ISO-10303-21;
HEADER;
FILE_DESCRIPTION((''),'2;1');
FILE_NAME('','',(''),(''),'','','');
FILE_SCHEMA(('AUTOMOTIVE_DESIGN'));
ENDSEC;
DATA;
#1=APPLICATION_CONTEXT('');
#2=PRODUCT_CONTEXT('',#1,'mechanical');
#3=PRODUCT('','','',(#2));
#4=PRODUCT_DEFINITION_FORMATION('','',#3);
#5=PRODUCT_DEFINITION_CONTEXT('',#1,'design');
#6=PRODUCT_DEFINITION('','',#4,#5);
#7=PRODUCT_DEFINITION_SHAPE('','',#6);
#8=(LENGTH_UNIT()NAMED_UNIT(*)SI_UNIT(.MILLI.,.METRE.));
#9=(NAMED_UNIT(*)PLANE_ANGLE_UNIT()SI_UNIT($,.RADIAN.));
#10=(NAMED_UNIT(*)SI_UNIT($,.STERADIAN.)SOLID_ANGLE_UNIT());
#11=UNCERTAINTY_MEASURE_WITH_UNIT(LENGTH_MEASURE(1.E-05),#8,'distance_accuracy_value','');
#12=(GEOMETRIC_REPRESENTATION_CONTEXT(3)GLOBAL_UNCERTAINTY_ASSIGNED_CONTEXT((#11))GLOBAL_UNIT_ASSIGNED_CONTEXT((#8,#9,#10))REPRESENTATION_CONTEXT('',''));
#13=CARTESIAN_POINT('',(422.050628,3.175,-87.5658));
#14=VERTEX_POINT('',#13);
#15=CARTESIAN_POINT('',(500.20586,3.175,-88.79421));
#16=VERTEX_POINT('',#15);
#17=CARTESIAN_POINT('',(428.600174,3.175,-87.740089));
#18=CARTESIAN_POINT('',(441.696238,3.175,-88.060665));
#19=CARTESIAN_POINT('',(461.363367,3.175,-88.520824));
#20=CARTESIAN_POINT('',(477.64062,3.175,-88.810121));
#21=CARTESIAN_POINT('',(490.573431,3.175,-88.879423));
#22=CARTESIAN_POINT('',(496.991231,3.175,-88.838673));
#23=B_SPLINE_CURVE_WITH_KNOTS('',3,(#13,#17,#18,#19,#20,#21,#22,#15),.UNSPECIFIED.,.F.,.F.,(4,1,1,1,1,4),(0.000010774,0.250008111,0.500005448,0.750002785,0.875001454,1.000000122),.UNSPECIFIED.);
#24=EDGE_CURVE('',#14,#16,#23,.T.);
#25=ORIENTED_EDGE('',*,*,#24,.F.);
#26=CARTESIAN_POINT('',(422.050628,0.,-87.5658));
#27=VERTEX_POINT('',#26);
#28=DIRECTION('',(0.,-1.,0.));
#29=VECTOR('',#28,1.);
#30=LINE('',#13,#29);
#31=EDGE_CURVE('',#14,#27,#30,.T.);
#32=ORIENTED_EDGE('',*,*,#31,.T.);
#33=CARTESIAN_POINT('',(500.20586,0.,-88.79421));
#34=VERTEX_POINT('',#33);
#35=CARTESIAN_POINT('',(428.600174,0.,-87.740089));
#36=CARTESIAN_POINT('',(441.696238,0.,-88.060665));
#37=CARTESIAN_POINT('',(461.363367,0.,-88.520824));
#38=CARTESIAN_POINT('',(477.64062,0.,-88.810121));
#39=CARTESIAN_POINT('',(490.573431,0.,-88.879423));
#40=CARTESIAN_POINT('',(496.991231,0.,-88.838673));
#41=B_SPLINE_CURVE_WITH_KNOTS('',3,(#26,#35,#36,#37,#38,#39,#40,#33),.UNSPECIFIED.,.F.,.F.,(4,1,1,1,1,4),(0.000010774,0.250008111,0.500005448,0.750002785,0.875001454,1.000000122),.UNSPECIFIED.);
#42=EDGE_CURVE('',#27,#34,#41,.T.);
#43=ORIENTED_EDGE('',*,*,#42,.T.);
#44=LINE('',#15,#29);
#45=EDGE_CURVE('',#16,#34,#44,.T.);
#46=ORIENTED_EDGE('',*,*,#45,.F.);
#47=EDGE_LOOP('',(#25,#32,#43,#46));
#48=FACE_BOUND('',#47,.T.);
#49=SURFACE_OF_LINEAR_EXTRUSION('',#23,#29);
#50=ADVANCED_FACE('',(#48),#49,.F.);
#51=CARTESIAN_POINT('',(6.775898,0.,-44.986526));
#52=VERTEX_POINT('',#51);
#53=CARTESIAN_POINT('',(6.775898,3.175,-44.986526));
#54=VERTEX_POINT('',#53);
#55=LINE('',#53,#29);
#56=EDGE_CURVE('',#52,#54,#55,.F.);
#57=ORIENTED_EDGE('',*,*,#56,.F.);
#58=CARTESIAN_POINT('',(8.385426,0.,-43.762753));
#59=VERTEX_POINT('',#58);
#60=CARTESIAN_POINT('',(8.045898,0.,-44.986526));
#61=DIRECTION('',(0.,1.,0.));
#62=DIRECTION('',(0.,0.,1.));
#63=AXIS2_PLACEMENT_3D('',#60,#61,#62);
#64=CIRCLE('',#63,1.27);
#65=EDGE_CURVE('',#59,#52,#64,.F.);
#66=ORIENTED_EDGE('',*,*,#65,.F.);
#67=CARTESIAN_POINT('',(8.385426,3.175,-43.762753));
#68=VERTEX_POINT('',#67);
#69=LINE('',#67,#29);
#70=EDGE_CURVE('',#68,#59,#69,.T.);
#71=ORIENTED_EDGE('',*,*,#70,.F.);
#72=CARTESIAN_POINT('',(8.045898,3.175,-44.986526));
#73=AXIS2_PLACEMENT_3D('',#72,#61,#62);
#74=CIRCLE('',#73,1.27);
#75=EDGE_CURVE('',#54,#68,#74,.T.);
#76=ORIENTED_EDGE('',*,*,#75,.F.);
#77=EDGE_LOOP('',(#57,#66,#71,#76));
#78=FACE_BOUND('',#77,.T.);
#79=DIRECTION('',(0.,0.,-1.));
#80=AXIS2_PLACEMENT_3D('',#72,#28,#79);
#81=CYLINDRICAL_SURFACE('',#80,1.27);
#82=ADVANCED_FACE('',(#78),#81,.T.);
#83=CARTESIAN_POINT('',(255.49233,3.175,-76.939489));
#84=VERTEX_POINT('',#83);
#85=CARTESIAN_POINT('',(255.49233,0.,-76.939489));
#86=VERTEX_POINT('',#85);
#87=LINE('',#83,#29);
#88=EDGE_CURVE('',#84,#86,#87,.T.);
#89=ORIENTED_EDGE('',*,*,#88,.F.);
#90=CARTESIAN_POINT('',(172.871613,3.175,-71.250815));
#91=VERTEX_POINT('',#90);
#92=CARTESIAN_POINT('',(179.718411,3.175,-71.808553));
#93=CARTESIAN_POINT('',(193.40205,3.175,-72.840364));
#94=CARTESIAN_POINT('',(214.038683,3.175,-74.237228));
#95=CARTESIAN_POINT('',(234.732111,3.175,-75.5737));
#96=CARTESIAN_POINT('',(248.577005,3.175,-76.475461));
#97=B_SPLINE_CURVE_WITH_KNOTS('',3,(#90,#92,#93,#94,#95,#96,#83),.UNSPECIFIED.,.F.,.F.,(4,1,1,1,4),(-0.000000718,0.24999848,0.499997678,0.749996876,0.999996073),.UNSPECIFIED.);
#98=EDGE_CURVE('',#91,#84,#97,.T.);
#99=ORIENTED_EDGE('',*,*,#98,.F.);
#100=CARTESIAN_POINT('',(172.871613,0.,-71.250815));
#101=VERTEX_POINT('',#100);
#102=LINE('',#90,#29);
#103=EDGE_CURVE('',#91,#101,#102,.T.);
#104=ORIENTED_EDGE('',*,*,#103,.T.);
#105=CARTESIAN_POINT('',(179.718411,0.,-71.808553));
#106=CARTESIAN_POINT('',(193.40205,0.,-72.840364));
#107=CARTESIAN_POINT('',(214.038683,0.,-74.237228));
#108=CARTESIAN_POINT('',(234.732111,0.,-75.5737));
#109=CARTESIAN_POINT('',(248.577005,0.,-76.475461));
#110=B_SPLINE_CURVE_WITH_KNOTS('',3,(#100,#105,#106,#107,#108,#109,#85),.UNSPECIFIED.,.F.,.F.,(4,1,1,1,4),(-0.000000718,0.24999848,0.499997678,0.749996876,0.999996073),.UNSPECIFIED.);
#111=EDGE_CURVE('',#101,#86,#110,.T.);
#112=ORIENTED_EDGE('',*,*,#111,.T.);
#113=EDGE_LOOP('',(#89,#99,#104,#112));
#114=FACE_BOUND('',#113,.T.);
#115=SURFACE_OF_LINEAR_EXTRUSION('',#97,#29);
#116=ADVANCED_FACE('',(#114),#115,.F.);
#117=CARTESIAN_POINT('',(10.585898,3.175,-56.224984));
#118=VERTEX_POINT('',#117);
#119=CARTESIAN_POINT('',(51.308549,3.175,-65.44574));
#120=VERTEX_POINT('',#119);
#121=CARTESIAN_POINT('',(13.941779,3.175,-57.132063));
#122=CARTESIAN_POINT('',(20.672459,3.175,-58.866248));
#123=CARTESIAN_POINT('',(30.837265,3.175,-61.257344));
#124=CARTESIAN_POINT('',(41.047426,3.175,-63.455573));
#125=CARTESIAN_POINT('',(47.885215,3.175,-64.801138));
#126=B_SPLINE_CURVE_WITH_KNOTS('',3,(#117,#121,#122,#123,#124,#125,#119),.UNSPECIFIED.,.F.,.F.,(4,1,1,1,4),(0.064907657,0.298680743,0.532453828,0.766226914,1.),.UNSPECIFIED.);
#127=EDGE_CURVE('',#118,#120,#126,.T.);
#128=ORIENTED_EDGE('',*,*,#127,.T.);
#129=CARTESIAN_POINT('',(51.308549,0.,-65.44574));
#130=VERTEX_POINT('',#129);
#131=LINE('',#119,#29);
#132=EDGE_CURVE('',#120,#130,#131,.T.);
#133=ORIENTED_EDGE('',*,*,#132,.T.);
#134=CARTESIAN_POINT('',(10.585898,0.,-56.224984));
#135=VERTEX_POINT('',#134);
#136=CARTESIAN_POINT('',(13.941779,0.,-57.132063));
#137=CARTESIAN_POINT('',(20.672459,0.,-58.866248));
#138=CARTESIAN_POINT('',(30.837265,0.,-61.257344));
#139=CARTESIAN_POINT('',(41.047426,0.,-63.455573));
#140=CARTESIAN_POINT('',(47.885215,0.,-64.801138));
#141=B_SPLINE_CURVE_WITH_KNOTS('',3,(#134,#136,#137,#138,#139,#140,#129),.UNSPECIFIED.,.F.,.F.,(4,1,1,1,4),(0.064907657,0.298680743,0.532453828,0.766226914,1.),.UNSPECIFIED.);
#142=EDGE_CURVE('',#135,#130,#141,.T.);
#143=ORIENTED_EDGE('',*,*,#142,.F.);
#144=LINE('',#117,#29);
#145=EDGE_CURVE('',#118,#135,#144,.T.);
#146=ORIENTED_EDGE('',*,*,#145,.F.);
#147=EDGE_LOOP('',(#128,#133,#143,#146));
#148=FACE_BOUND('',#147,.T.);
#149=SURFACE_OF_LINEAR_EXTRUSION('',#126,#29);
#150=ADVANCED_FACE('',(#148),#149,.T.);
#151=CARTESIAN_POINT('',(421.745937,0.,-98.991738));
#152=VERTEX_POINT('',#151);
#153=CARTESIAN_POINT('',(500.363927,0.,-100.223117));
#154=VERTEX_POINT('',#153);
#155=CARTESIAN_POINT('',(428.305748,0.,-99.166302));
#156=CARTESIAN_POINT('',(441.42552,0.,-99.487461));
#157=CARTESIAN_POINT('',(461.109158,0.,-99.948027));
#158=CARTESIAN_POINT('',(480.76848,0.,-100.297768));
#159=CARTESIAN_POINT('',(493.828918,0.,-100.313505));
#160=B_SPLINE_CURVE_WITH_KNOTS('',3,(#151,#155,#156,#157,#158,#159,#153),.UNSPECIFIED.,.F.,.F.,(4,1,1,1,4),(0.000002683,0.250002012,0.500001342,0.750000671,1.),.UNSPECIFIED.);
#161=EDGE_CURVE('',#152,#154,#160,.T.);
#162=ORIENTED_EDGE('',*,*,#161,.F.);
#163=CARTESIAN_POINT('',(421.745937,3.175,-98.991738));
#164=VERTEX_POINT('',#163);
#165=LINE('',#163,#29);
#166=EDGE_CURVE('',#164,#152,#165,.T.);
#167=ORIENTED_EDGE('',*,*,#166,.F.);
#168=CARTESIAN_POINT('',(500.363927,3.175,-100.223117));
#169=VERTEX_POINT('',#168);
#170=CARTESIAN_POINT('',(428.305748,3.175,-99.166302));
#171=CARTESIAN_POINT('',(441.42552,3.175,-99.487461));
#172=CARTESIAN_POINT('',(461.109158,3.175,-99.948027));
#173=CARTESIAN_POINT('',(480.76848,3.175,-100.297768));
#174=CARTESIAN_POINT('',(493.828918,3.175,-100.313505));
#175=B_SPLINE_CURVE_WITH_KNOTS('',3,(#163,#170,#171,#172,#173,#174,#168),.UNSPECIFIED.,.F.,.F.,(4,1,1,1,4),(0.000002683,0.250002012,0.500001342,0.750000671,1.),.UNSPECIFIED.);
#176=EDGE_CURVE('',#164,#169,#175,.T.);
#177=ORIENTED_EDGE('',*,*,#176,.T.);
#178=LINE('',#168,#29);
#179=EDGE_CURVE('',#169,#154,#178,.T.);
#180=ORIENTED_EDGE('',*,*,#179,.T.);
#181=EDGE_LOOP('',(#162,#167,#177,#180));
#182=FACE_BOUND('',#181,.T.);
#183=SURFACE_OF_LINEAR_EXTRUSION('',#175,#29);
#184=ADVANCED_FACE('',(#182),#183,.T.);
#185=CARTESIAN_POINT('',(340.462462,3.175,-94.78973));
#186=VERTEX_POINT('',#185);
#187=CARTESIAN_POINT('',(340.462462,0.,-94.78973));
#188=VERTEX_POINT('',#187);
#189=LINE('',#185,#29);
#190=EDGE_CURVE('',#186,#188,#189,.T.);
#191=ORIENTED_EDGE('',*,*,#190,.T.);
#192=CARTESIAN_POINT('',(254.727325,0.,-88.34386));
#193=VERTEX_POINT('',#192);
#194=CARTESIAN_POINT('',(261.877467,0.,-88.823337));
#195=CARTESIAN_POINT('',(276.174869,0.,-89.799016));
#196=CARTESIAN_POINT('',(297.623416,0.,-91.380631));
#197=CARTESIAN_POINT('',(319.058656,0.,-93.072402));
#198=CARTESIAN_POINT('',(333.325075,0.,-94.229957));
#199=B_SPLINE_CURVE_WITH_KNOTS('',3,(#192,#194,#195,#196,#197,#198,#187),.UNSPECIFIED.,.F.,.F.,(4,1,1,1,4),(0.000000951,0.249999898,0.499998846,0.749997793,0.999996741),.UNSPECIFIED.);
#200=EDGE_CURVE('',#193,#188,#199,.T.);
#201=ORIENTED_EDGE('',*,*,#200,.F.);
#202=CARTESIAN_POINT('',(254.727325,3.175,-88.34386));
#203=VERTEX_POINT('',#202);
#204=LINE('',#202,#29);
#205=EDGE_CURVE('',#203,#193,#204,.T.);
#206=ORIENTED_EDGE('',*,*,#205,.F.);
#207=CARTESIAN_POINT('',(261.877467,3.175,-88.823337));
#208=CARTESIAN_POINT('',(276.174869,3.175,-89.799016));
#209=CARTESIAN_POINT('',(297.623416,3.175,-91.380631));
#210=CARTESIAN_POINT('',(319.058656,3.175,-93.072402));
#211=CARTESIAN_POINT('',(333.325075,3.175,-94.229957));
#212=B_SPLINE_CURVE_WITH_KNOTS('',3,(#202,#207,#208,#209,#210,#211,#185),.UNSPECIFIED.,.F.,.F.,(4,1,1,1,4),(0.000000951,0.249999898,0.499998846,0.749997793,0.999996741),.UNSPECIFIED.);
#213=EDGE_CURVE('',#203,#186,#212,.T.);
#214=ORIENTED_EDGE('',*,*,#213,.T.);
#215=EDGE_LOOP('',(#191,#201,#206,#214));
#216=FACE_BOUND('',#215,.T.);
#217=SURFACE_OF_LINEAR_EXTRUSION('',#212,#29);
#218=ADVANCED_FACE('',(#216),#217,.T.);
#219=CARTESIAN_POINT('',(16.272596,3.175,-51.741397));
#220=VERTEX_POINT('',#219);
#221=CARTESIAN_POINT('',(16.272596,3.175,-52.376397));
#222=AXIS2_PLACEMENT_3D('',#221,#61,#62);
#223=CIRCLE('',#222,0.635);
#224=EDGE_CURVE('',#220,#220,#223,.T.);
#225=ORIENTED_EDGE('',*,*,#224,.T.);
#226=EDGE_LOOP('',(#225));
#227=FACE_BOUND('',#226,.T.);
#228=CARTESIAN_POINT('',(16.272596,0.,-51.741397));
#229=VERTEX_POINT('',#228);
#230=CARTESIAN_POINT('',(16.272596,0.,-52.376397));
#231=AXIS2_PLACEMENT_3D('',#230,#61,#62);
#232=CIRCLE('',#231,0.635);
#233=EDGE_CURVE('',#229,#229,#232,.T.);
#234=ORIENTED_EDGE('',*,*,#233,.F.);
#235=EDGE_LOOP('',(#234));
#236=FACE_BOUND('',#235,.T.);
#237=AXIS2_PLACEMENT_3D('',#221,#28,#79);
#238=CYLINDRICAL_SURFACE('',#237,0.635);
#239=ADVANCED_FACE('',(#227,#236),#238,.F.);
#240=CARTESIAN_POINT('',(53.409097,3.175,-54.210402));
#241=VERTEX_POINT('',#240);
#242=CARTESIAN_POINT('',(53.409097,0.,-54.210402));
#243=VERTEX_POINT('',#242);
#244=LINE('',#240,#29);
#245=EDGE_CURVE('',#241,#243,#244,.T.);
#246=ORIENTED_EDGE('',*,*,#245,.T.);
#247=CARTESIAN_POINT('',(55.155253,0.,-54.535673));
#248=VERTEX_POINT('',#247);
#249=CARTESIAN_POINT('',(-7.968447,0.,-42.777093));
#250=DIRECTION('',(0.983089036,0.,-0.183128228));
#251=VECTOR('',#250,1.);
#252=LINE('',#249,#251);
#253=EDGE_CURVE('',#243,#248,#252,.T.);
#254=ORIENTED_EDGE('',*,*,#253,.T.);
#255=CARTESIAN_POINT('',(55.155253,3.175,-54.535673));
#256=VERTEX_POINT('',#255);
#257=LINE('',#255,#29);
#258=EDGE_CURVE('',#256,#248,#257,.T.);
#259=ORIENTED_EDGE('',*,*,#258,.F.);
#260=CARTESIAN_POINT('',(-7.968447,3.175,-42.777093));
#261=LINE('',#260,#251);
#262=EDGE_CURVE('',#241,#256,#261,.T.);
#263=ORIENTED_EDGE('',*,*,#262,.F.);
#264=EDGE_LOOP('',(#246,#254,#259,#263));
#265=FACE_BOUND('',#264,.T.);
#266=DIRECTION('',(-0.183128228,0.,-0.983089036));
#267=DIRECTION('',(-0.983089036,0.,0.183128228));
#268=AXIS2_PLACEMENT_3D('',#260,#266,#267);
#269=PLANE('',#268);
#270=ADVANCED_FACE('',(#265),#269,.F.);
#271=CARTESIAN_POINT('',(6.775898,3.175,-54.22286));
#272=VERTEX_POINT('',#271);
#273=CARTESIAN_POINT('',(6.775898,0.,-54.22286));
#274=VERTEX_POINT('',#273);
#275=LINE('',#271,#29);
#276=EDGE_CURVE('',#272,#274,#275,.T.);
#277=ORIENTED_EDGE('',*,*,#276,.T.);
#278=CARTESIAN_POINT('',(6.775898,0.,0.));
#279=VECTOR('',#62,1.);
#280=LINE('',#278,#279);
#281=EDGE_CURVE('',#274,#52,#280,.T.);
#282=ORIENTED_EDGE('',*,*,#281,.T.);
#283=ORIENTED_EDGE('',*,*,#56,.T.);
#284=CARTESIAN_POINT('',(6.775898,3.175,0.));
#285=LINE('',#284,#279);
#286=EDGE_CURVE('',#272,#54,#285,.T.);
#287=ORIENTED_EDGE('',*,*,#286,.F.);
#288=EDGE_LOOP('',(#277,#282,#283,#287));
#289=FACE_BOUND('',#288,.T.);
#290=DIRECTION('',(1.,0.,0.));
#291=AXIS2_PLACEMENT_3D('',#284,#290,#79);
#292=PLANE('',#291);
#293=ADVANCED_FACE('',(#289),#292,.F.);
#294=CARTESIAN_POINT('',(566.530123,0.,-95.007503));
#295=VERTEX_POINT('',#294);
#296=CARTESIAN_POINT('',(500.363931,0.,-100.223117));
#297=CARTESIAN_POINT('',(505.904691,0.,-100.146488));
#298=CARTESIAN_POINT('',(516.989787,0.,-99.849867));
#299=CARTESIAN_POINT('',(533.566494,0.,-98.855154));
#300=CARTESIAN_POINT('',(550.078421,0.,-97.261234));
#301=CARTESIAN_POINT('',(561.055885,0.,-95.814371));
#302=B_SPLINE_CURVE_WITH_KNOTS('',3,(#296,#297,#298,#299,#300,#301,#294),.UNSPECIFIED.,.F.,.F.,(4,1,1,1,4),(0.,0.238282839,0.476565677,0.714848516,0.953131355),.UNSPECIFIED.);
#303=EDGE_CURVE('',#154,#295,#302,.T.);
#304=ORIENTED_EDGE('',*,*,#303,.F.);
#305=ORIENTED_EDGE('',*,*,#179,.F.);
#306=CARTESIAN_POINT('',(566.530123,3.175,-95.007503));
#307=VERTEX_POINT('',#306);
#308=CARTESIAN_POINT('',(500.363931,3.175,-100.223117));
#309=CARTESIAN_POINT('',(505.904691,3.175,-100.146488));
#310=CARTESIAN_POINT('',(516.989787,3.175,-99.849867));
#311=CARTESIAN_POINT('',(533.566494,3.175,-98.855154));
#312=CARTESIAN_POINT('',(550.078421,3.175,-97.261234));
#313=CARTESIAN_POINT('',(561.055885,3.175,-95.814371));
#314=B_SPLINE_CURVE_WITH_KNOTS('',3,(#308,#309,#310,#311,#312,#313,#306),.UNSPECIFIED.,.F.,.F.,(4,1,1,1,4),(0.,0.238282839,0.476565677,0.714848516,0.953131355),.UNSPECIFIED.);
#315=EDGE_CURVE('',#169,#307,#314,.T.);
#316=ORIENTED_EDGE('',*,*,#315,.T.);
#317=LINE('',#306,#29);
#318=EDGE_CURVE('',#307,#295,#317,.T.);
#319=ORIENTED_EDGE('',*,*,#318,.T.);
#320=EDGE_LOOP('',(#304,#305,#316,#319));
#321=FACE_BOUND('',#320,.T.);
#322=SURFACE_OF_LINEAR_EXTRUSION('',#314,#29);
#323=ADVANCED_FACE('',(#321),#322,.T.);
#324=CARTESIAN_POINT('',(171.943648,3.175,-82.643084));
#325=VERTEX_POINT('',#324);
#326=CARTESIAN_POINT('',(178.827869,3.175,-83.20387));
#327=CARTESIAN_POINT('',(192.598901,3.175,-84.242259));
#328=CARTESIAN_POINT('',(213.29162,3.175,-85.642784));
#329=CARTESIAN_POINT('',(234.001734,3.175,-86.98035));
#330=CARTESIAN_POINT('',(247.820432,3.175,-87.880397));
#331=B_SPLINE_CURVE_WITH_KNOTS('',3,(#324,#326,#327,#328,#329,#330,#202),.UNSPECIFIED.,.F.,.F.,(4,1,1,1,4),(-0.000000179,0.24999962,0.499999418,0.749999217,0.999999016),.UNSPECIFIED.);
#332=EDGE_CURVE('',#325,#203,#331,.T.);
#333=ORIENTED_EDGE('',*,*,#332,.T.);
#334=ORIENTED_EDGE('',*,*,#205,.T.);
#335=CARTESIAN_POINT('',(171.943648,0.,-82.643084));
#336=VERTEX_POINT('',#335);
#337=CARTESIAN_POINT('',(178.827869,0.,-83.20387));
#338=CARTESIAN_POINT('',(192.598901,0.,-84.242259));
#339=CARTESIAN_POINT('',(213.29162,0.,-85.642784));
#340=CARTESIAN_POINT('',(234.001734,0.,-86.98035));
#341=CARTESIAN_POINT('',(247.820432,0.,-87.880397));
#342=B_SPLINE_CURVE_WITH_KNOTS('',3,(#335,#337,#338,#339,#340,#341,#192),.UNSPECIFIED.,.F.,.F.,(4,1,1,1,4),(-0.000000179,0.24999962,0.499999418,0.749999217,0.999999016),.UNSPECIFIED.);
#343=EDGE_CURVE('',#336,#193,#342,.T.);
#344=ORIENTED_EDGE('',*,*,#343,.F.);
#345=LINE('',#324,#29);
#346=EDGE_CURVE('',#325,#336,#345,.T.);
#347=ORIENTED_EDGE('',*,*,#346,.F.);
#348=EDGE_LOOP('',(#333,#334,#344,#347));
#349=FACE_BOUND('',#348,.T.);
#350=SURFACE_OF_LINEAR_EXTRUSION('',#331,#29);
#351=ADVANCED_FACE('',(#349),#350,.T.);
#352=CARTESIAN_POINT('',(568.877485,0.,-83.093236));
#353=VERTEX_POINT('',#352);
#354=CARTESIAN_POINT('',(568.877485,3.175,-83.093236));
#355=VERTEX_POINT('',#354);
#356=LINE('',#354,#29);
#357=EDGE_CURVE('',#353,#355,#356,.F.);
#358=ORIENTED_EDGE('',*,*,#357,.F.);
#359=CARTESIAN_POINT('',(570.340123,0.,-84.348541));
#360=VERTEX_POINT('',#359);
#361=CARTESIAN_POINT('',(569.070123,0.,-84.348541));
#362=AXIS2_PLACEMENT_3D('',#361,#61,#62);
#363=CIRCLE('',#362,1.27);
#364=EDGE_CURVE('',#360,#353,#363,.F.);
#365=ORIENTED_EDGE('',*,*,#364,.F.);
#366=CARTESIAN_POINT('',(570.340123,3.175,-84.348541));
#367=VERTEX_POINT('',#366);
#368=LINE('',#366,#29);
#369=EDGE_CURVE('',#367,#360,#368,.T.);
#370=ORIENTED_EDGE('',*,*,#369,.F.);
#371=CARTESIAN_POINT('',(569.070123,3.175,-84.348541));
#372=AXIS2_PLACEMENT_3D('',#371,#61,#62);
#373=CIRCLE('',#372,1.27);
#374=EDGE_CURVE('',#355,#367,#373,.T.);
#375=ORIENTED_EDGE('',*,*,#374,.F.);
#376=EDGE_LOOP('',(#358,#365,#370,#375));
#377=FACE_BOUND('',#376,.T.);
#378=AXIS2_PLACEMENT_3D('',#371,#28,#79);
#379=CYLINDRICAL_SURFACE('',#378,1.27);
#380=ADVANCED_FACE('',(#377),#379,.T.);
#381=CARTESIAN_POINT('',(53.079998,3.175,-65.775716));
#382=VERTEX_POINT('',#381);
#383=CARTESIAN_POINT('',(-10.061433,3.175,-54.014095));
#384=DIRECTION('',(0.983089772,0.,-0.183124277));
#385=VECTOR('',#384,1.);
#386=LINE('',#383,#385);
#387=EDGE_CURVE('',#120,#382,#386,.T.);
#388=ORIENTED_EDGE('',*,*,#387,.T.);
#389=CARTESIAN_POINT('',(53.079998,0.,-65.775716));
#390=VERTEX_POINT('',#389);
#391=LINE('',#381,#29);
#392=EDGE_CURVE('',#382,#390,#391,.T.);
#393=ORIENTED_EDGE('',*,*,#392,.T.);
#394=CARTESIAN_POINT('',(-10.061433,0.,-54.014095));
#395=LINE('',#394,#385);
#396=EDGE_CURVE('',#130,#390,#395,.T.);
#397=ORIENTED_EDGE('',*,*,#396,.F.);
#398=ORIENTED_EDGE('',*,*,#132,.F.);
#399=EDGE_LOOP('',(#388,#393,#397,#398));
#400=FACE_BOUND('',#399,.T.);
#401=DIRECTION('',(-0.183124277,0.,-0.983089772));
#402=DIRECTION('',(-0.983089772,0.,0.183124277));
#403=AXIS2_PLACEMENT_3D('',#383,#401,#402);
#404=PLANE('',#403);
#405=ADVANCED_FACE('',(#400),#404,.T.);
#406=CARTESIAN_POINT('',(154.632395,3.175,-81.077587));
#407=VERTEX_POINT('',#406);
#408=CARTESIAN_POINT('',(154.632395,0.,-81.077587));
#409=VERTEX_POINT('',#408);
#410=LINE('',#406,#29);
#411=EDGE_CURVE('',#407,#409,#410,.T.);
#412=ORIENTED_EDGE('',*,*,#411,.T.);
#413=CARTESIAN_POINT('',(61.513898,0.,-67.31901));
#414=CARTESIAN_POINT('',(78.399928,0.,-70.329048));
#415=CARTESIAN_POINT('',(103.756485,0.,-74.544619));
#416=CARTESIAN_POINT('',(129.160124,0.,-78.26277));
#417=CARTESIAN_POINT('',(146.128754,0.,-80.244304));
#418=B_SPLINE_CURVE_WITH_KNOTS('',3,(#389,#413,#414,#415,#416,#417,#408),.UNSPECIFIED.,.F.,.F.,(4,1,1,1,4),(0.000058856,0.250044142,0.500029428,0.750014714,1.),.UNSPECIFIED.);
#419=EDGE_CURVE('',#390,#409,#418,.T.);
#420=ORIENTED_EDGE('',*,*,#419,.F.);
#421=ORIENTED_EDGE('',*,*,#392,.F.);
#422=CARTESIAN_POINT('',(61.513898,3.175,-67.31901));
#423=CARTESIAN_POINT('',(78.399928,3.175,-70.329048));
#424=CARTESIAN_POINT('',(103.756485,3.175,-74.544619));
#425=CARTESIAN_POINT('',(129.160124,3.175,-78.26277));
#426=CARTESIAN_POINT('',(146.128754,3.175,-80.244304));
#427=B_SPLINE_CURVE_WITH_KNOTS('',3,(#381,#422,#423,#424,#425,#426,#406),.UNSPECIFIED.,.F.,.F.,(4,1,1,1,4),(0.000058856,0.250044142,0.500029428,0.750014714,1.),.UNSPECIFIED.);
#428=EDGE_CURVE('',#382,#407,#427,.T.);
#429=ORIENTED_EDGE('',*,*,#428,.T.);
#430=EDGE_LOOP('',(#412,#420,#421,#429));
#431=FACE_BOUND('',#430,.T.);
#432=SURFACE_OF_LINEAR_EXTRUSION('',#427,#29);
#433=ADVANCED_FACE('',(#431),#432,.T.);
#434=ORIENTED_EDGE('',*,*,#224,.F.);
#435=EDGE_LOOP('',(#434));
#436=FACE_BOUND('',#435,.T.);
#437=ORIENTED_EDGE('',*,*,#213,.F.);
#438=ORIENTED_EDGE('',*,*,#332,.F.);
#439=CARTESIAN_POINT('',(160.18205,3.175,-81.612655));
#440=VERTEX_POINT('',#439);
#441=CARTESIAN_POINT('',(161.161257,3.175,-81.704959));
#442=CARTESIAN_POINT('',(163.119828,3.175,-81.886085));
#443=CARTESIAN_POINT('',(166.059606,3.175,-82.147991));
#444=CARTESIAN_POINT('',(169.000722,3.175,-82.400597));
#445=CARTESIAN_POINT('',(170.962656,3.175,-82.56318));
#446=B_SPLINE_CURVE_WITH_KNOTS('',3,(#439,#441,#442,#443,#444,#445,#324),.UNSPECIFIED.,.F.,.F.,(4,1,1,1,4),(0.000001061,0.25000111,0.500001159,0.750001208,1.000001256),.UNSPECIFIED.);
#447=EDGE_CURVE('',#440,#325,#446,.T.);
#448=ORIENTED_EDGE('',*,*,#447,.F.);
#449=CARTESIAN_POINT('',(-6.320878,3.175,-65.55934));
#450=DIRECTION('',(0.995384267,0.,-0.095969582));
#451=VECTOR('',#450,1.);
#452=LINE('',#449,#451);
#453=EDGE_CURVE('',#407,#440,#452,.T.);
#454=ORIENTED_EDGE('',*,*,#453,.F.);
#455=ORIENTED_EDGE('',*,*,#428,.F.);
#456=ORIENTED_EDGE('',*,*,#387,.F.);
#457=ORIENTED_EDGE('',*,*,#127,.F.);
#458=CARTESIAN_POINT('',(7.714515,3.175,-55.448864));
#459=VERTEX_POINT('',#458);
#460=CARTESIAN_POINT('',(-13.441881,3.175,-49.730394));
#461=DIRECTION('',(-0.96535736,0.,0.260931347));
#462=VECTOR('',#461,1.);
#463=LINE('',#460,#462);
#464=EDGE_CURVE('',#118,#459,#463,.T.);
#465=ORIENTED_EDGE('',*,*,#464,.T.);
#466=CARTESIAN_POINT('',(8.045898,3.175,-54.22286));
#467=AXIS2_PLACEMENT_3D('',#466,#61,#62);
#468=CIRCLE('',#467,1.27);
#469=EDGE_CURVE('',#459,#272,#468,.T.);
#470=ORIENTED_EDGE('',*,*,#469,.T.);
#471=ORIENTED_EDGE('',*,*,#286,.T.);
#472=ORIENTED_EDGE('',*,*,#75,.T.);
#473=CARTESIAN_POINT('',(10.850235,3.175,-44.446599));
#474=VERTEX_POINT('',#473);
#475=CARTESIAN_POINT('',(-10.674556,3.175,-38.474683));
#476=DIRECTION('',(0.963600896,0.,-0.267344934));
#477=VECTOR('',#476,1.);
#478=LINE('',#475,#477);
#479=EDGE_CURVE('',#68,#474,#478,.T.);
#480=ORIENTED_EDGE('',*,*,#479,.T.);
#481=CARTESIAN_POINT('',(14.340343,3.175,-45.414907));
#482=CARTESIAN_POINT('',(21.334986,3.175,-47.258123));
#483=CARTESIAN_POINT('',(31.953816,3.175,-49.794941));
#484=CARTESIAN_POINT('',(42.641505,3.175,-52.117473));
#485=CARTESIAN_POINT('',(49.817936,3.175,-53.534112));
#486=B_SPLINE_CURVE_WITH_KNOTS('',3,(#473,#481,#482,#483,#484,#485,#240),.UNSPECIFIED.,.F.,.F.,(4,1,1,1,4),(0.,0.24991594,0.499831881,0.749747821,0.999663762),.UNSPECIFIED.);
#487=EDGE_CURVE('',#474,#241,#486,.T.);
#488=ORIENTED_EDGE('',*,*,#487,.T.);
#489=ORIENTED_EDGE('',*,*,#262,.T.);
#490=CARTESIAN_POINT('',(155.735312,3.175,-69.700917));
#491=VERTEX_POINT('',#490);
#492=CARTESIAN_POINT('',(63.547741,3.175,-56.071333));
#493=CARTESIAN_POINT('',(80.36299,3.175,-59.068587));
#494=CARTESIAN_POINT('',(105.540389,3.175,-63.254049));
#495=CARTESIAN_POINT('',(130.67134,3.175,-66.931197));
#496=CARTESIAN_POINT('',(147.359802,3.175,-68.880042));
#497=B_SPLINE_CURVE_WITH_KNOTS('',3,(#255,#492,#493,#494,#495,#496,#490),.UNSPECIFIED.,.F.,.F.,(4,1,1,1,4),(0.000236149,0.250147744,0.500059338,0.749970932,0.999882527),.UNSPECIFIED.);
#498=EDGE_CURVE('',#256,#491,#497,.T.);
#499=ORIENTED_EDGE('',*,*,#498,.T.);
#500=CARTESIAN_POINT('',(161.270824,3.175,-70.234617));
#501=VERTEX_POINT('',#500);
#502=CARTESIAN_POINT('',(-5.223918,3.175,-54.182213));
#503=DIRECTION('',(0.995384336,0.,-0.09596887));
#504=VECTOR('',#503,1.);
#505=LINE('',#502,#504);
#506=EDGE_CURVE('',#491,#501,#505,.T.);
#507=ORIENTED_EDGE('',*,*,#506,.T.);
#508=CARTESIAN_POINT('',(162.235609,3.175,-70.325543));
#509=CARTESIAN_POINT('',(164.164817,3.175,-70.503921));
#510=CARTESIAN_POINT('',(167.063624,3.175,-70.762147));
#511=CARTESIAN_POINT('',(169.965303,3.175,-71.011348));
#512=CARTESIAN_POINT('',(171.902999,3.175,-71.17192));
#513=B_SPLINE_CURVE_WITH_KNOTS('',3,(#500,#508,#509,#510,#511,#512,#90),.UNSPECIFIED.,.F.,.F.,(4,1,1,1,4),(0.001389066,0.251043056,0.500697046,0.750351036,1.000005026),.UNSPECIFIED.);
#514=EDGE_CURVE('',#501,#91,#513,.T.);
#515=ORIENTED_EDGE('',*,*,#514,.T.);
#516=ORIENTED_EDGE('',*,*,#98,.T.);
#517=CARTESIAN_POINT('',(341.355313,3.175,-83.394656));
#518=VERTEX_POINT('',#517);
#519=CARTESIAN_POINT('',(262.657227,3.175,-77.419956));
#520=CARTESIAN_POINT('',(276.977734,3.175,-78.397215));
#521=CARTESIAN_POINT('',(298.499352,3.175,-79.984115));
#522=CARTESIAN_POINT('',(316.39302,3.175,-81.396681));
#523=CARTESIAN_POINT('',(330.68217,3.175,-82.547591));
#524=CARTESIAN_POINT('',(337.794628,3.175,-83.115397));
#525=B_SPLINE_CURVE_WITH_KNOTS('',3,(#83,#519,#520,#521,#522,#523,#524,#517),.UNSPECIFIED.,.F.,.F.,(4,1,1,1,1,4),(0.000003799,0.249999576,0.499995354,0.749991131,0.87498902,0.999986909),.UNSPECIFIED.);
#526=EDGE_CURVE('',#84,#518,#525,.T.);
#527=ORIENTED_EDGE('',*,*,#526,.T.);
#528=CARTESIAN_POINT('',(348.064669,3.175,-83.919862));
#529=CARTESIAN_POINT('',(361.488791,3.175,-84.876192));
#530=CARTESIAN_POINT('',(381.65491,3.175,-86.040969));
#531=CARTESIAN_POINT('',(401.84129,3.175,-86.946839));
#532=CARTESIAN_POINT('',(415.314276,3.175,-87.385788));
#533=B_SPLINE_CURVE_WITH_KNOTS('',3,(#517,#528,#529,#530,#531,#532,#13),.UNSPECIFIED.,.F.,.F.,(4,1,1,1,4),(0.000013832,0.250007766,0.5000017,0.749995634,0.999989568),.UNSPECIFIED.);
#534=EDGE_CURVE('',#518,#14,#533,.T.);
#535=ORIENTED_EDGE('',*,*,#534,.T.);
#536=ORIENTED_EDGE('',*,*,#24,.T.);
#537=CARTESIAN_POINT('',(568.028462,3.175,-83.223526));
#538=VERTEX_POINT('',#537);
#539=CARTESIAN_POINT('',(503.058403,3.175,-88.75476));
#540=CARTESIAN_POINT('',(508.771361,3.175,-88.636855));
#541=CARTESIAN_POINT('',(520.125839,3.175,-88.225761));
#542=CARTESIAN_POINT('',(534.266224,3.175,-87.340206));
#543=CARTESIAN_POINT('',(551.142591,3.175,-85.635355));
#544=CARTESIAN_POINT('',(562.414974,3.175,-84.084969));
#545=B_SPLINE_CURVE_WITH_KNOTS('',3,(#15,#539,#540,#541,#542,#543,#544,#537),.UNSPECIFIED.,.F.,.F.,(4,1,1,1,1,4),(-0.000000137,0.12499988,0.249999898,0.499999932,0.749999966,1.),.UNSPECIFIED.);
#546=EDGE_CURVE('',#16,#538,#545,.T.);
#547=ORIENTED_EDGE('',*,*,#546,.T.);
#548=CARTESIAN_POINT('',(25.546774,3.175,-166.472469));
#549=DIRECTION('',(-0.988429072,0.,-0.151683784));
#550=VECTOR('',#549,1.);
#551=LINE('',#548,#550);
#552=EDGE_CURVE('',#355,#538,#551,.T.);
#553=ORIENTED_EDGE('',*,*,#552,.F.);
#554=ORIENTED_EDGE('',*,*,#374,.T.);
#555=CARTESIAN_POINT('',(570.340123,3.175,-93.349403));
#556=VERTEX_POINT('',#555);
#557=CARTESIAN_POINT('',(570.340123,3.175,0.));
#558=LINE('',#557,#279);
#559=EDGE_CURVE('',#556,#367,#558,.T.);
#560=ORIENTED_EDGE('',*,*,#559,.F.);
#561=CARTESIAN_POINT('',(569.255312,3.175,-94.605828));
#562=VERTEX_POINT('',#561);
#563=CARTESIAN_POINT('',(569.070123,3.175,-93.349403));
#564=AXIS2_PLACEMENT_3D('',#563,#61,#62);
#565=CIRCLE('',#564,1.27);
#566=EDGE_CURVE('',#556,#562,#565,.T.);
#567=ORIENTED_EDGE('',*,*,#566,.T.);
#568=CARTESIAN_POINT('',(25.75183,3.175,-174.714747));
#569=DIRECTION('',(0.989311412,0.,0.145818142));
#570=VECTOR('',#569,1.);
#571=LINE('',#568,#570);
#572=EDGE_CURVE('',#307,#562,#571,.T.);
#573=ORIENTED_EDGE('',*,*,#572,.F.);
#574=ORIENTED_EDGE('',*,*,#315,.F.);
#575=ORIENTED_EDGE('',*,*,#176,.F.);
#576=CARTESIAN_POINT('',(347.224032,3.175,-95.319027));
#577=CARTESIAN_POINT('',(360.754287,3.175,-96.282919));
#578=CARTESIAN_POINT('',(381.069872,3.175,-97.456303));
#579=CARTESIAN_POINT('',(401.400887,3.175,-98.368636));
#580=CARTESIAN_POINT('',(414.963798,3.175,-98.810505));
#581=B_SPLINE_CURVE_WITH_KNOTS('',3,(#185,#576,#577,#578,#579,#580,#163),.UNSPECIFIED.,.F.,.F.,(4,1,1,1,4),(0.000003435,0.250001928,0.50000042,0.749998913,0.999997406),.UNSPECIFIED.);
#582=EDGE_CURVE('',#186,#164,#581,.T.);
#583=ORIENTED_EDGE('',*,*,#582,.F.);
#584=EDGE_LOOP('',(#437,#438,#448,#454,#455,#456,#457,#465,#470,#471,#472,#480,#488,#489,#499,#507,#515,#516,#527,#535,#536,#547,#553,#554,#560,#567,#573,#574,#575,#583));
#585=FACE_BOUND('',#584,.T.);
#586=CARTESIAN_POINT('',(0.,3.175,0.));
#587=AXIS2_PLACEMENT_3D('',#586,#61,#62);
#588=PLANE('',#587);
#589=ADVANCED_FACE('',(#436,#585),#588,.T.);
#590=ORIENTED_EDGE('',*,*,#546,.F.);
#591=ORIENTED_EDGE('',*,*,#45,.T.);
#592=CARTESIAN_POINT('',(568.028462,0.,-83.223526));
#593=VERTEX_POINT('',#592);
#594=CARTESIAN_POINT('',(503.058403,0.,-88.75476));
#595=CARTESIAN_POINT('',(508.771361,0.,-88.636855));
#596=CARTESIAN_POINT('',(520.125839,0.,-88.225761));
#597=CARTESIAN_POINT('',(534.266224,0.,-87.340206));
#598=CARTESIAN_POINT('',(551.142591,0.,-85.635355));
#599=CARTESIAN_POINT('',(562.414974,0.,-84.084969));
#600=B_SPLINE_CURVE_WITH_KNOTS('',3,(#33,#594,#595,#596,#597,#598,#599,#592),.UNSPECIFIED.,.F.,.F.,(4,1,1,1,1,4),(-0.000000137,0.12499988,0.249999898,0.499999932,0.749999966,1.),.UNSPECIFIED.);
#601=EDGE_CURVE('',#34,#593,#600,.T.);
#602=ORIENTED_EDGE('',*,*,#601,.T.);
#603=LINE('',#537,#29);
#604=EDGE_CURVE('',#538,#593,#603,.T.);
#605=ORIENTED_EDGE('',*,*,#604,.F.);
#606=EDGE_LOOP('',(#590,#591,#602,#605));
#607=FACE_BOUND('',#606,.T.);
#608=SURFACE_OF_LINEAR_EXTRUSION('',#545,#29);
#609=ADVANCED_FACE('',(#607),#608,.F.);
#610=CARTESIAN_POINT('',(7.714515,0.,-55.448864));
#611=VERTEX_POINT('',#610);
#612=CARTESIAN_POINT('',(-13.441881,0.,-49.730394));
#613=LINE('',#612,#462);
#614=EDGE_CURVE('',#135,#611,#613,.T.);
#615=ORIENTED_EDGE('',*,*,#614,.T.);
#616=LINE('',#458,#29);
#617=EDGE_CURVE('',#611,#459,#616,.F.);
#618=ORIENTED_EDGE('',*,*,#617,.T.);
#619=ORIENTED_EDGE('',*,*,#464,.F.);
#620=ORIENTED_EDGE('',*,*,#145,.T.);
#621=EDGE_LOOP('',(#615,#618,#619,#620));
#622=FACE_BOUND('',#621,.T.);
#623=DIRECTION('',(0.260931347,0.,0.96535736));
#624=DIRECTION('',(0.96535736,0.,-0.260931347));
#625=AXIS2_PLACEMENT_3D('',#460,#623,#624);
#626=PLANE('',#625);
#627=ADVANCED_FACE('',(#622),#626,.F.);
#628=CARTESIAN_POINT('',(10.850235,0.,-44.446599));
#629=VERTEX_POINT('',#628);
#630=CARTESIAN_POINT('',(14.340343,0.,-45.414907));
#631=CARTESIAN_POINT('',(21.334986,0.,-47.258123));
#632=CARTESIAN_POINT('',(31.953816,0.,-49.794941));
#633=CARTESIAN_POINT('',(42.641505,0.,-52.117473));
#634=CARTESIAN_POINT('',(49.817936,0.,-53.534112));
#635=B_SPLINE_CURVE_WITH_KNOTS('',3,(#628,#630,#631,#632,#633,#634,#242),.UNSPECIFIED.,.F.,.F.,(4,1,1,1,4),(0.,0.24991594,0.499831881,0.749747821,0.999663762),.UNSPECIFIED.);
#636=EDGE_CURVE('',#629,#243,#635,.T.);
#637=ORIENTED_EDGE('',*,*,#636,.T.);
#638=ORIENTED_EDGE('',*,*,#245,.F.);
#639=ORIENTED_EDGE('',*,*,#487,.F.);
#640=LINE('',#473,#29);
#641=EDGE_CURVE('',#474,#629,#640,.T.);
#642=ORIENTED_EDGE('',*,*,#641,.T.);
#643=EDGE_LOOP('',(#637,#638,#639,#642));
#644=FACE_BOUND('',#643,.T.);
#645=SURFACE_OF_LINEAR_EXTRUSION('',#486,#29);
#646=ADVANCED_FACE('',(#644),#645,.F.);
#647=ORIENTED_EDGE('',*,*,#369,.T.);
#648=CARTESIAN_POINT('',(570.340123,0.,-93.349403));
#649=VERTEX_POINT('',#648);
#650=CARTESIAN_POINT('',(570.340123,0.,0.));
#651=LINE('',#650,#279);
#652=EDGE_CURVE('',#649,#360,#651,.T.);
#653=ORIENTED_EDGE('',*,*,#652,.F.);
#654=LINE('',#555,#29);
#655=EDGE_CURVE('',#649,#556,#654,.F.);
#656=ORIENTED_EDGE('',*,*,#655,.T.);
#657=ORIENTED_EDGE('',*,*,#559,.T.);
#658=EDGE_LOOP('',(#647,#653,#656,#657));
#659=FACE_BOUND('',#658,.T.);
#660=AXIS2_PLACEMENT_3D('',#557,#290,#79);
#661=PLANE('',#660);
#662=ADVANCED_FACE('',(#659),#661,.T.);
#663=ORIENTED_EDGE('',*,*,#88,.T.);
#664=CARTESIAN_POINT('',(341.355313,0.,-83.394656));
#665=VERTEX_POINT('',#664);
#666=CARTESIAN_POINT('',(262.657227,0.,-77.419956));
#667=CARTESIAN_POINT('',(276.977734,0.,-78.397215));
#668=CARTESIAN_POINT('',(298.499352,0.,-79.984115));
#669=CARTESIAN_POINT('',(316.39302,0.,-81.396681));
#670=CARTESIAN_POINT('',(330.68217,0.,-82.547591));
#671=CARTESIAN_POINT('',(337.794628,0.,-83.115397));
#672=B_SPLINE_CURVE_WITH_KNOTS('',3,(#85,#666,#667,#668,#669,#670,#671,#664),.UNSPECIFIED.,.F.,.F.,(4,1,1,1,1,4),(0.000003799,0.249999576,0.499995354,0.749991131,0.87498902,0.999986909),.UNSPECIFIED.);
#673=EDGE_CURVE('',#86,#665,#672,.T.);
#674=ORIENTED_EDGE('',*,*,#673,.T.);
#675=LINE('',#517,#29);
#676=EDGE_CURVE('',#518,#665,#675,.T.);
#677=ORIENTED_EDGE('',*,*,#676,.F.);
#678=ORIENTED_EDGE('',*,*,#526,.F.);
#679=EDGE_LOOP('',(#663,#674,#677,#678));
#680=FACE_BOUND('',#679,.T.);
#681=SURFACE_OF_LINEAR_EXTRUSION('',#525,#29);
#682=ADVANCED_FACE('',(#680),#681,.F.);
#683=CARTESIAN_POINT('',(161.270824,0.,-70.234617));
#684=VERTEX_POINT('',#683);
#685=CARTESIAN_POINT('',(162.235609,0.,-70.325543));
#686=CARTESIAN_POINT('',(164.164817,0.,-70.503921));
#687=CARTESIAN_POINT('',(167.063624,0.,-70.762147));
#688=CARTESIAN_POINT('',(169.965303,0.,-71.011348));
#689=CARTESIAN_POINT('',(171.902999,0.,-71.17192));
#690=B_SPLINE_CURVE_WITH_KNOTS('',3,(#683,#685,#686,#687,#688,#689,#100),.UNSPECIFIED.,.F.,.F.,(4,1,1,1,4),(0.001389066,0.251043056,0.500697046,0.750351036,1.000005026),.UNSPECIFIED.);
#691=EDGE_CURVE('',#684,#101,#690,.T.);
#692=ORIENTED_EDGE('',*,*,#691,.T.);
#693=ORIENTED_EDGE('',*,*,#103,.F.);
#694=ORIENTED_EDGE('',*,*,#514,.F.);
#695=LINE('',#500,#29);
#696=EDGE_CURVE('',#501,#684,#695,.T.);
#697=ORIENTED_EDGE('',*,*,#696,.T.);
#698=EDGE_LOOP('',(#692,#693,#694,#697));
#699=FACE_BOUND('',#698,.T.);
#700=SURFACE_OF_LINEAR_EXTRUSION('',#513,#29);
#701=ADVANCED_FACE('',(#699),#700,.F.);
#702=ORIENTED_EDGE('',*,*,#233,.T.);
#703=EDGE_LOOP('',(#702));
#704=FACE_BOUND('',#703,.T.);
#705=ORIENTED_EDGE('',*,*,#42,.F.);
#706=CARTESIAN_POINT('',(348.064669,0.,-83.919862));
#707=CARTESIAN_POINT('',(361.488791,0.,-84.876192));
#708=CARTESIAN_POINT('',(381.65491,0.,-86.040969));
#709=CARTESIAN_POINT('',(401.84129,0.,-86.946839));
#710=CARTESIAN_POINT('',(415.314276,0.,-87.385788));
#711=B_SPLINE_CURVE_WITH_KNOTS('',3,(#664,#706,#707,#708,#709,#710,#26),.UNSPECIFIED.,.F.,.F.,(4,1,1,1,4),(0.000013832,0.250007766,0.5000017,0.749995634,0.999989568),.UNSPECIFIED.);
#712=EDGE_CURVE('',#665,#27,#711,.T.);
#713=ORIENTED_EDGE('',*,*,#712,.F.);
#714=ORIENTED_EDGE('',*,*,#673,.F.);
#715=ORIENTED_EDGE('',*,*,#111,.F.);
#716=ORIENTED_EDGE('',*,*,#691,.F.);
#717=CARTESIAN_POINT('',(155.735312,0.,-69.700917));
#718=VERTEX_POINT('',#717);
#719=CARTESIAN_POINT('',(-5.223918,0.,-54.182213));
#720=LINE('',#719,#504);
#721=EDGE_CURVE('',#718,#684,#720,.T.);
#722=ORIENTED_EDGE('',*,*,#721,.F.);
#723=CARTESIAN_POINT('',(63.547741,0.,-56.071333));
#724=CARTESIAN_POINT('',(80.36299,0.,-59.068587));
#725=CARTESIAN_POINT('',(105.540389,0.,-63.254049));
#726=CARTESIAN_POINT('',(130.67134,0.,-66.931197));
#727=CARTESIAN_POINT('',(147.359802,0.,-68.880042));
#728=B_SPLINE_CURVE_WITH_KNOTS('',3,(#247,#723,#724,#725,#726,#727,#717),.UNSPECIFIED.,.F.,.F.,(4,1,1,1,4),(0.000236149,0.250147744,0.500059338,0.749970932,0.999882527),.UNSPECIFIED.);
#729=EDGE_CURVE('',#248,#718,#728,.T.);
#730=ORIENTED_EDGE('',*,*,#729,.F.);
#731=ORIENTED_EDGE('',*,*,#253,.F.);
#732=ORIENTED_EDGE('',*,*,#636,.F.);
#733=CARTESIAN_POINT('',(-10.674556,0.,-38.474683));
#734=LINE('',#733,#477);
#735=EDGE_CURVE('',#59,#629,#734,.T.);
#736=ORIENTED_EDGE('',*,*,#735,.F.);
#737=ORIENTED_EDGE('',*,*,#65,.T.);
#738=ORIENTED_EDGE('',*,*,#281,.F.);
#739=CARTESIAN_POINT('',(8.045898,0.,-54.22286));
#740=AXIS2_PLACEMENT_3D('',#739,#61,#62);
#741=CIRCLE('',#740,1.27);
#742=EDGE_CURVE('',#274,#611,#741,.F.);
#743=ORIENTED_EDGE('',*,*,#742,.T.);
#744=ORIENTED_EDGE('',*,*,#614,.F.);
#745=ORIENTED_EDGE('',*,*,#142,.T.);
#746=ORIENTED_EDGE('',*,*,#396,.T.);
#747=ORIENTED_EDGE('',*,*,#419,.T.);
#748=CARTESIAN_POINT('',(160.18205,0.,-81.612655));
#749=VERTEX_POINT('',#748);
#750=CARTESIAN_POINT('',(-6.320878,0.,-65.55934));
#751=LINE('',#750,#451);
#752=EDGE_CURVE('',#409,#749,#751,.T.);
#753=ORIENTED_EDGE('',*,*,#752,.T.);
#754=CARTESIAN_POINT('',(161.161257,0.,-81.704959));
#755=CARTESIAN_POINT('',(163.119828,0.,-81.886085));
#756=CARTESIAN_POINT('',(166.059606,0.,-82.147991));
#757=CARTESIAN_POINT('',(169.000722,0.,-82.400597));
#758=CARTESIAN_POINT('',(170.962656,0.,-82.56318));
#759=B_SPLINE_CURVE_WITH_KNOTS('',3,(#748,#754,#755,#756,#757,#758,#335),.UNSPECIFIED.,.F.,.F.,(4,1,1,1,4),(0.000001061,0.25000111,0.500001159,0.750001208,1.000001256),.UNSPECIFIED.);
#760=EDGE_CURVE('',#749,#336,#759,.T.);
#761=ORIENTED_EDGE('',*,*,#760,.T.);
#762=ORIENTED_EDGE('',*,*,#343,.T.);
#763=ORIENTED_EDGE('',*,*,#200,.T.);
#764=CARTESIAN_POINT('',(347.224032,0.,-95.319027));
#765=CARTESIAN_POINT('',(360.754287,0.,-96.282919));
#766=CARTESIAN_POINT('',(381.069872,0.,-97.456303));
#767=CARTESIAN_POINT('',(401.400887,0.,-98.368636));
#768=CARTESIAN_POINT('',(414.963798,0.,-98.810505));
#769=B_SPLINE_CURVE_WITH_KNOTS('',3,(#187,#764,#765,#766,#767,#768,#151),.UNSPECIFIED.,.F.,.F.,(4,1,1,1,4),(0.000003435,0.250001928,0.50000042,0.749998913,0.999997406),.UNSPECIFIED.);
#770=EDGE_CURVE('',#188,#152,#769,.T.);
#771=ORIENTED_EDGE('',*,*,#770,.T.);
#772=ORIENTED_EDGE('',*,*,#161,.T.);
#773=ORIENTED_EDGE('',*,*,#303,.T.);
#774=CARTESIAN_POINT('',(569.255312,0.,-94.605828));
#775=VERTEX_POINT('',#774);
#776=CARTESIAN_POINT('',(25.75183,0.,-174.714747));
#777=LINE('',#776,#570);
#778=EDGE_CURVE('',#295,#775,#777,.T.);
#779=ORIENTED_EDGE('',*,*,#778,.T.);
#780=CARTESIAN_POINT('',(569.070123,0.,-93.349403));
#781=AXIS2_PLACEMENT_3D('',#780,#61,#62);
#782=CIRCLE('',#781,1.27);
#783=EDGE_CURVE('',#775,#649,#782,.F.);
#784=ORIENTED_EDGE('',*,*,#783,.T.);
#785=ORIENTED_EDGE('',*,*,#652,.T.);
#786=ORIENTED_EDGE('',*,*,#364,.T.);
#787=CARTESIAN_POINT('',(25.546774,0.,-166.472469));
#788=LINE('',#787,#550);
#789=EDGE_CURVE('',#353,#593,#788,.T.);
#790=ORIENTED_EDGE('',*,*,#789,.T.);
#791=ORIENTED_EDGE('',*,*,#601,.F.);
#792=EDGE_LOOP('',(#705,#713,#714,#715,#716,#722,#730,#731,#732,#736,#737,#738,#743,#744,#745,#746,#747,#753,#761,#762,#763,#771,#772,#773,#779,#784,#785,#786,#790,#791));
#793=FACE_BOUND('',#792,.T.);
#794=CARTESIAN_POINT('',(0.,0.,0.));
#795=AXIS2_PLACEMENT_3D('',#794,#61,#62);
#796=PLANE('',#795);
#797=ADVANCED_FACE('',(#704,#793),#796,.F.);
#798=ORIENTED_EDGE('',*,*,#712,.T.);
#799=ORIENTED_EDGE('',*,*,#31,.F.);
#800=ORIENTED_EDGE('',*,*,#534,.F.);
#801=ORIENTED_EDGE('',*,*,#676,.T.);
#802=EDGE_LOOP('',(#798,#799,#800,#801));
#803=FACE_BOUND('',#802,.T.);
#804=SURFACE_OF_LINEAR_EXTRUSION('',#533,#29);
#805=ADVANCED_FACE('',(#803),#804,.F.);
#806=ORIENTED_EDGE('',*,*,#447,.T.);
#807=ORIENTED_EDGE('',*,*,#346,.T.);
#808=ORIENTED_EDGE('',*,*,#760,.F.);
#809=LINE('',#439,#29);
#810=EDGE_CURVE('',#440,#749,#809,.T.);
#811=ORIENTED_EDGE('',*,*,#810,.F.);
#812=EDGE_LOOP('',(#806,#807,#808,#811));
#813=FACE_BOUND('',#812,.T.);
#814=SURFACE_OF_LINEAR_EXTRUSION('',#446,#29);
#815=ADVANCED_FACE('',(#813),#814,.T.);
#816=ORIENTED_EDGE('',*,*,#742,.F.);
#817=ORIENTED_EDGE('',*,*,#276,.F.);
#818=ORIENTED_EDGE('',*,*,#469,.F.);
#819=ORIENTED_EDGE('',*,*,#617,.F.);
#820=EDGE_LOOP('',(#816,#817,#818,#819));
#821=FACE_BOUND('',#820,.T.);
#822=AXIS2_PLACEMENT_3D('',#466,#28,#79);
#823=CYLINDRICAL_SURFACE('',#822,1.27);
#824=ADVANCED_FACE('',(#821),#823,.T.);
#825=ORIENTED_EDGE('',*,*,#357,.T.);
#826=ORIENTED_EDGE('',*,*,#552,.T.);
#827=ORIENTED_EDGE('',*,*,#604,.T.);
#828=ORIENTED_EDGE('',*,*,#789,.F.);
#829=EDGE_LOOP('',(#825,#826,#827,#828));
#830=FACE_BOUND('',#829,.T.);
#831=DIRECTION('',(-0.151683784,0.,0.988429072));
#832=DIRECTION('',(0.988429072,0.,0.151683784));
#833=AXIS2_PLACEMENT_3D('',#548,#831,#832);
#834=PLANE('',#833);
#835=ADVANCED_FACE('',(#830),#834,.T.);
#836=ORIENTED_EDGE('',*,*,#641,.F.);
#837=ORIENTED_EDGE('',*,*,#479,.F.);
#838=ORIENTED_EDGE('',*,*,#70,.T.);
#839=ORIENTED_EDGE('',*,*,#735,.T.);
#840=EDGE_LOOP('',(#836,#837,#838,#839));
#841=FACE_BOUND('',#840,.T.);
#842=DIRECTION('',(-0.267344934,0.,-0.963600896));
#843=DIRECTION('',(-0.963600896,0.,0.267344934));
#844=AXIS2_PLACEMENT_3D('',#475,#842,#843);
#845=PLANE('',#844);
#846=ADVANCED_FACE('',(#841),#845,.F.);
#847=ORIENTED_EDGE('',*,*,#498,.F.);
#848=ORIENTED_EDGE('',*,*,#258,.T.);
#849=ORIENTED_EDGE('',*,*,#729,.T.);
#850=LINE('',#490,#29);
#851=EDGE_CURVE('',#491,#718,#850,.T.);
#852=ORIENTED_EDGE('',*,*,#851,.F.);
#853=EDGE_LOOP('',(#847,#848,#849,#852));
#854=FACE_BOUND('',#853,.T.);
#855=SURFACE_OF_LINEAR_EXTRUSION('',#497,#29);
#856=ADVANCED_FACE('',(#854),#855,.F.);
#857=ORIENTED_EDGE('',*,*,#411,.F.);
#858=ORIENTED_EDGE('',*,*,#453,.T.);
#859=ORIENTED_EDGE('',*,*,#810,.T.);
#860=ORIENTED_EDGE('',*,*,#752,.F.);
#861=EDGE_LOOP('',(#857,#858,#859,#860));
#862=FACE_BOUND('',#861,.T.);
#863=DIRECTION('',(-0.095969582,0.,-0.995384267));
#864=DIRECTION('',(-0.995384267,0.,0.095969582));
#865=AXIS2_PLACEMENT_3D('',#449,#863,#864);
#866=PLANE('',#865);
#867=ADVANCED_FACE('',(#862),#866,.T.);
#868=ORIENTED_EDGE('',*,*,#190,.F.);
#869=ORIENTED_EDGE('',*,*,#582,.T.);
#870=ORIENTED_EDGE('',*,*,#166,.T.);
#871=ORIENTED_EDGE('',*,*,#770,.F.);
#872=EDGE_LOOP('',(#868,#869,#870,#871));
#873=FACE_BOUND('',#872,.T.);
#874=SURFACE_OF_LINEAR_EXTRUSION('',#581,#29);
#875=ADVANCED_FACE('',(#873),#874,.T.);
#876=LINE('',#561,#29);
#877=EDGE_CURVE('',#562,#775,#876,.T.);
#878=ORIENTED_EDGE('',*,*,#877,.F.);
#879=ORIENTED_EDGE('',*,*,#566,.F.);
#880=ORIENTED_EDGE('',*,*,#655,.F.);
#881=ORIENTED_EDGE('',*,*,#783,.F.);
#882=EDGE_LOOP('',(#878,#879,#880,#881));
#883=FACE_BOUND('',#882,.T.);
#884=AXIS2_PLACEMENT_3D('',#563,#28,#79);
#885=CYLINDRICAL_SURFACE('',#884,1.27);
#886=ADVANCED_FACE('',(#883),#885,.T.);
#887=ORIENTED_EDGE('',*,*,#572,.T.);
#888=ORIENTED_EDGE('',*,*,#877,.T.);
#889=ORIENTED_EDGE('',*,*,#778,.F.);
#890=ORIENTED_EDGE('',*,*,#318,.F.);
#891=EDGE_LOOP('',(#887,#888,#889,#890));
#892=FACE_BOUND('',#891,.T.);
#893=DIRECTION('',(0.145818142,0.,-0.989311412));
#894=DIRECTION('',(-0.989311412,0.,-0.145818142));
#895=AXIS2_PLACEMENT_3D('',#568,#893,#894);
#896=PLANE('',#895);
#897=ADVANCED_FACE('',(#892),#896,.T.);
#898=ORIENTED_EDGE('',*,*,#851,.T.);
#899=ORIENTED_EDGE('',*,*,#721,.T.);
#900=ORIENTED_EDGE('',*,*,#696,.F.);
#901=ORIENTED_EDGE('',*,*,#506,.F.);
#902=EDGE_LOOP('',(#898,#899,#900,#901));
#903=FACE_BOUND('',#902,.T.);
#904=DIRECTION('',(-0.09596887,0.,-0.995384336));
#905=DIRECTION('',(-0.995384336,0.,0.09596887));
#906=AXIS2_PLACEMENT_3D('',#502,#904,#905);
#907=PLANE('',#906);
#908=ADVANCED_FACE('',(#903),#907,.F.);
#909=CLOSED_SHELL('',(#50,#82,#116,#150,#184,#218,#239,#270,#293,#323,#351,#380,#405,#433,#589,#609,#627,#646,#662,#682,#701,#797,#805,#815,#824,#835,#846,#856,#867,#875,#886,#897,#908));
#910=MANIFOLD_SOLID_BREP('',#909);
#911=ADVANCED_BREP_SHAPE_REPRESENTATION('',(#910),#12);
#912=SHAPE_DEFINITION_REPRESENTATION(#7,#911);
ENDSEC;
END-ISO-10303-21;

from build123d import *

# Parameters (mm, degrees)
BOSS_EXTRUDE1_OUTLINE_R = 0.635
BOSS_EXTRUDE1_DEPTH     = 3.175
FILLET1_R               = 1.27


with BuildPart() as part:
    # Boss-Extrude1: read off the stored shape, not the designer's step
    # Boss-Extrude1 outline → Boss-Extrude1 (new body)
    with BuildSketch(Plane(origin=(0, 0, 0), x_dir=(1, 0, 0), z_dir=(0, 1, 0))):
        with BuildLine():
            add(Edge.make_bspline(
                [(500.363931332, 100.223117218), (505.904690625, 100.146488345), (516.98978709, 99.849867286), (533.566493845, 98.855153949), (550.078420692, 97.261234107), (561.055884951, 95.814370924), (566.530123356, 95.007503377)],
                knots=[0, 0, 0, 0, 0.238282839, 0.476565677, 0.714848516, 0.953131355, 0.953131355, 0.953131355, 0.953131355], degree=3))
            add(Edge.make_bspline(
                [(421.745937115, 98.991738452), (428.305748156, 99.166301643), (441.425519501, 99.487460571), (461.109158457, 99.948027433), (480.768480262, 100.297767803), (493.828917925, 100.313504897), (500.363931332, 100.223117218)],
                knots=[2.683e-06, 2.683e-06, 2.683e-06, 2.683e-06, 0.250002012, 0.500001342, 0.750000671, 1, 1, 1, 1], degree=3))
            add(Edge.make_bspline(
                [(340.462462002, 94.7897299), (347.224032201, 95.319027204), (360.754286882, 96.282918846), (381.069871528, 97.456302869), (401.400886655, 98.368636041), (414.96379764, 98.810505185), (421.745937115, 98.991738452)],
                knots=[3.435e-06, 3.435e-06, 3.435e-06, 3.435e-06, 0.250001928, 0.50000042, 0.749998913, 0.999997406, 0.999997406, 0.999997406, 0.999997406], degree=3))
            add(Edge.make_bspline(
                [(254.727325479, 88.343859808), (261.87746665, 88.823336878), (276.174869396, 89.799016416), (297.623416106, 91.380630717), (319.058656024, 93.072402004), (333.325074716, 94.22995733), (340.462462002, 94.7897299)],
                knots=[9.51e-07, 9.51e-07, 9.51e-07, 9.51e-07, 0.249999898, 0.499998846, 0.749997793, 0.999996741, 0.999996741, 0.999996741, 0.999996741], degree=3))
            add(Edge.make_bspline(
                [(171.943647819, 82.643083752), (178.827869401, 83.20387), (192.598901149, 84.242258738), (213.291619829, 85.642783935), (234.001733829, 86.980350184), (247.820432283, 87.880397005), (254.727325479, 88.343859808)],
                knots=[-1.79e-07, -1.79e-07, -1.79e-07, -1.79e-07, 0.24999962, 0.499999418, 0.749999217, 0.999999016, 0.999999016, 0.999999016, 0.999999016], degree=3))
            add(Edge.make_bspline(
                [(160.182050495, 81.61265481), (161.161257266, 81.70495935), (163.119828179, 81.886084692), (166.059605792, 82.147991178), (169.000722356, 82.400596631), (170.962655848, 82.563180216), (171.943647819, 82.643083752)],
                knots=[1.061e-06, 1.061e-06, 1.061e-06, 1.061e-06, 0.25000111, 0.500001159, 0.750001208, 1.000001256, 1.000001256, 1.000001256, 1.000001256], degree=3))
            Line((160.182050495, 81.61265481), (154.632395026, 81.077586961))
            add(Edge.make_bspline(
                [(53.079998289, 65.775715516), (61.513898232, 67.319009556), (78.399927581, 70.329047536), (103.756484767, 74.544619134), (129.160124243, 78.262769864), (146.128753825, 80.24430394), (154.632395026, 81.077586961)],
                knots=[5.8856e-05, 5.8856e-05, 5.8856e-05, 5.8856e-05, 0.250044142, 0.500029428, 0.750014714, 1, 1, 1, 1], degree=3))
            Line((53.079998289, 65.775715516), (51.308549202, 65.445740225))
            add(Edge.make_bspline(
                [(10.585897899, 56.224984318), (13.941779162, 57.132062519), (20.672458821, 58.866248382), (30.837264924, 61.257343807), (41.047425931, 63.455573181), (47.885214569, 64.801138415), (51.308549202, 65.445740225)],
                knots=[0.064907657, 0.064907657, 0.064907657, 0.064907657, 0.298680743, 0.532453828, 0.766226914, 1, 1, 1, 1], degree=3))
            Line((10.585897899, 56.224984318), (6.775897899, 55.195160056))
            Line((6.775897899, 55.195160056), (6.775897899, 43.316199984))
            Line((6.775897899, 43.316199984), (10.850234699, 44.446598793))
            add(Edge.make_bspline(
                [(10.850234699, 44.446598793), (14.340342636, 45.414907022), (21.334985759, 47.258123006), (31.953816099, 49.794941322), (42.64150526, 52.117473464), (49.81793576, 53.534111605), (53.409096635, 54.210402111)],
                knots=[0, 0, 0, 0, 0.24991594, 0.499831881, 0.749747821, 0.999663762, 0.999663762, 0.999663762, 0.999663762], degree=3))
            Line((53.409096635, 54.210402111), (55.155253114, 54.535673302))
            add(Edge.make_bspline(
                [(55.155253114, 54.535673302), (63.54774086, 56.071332867), (80.36299007, 59.06858723), (105.540389435, 63.254049355), (130.671339907, 66.93119705), (147.359801836, 68.880042413), (155.735311702, 69.700917089)],
                knots=[0.000236149, 0.000236149, 0.000236149, 0.000236149, 0.250147744, 0.500059338, 0.749970932, 0.999882527, 0.999882527, 0.999882527, 0.999882527], degree=3))
            Line((155.735311702, 69.700917089), (161.270823741, 70.234617305))
            add(Edge.make_bspline(
                [(161.270823741, 70.234617305), (162.235608998, 70.325543269), (164.164816506, 70.503921062), (167.063624178, 70.762146818), (169.965303116, 71.011348444), (171.902999143, 71.171919977), (172.87161313, 71.250815305)],
                knots=[0.001389066, 0.001389066, 0.001389066, 0.001389066, 0.251043056, 0.500697046, 0.750351036, 1.000005026, 1.000005026, 1.000005026, 1.000005026], degree=3))
            add(Edge.make_bspline(
                [(172.87161313, 71.250815305), (179.718410582, 71.808552996), (193.402049653, 72.840364183), (214.038683352, 74.237228358), (234.732110585, 75.573699755), (248.577004917, 76.475460963), (255.492330083, 76.939489241)],
                knots=[-7.18e-07, -7.18e-07, -7.18e-07, -7.18e-07, 0.24999848, 0.499997678, 0.749996876, 0.999996073, 0.999996073, 0.999996073, 0.999996073], degree=3))
            add(Edge.make_bspline(
                [(255.492330083, 76.939489241), (262.657227476, 77.419956035), (276.977734346, 78.397215401), (298.499351954, 79.984114865), (316.393020167, 81.39668078), (330.682169872, 82.547590749), (337.794627544, 83.115396626), (341.355313187, 83.394655636)],
                knots=[3.799e-06, 3.799e-06, 3.799e-06, 3.799e-06, 0.249999576, 0.499995354, 0.749991131, 0.87498902, 0.999986909, 0.999986909, 0.999986909, 0.999986909], degree=3))
            add(Edge.make_bspline(
                [(341.355313187, 83.394655636), (348.06466872, 83.919861633), (361.488791434, 84.876192049), (381.654909862, 86.040969048), (401.841290064, 86.946839421), (415.314276027, 87.385788047), (422.050628462, 87.565800259)],
                knots=[1.3832e-05, 1.3832e-05, 1.3832e-05, 1.3832e-05, 0.250007766, 0.5000017, 0.749995634, 0.999989568, 0.999989568, 0.999989568, 0.999989568], degree=3))
            add(Edge.make_bspline(
                [(422.050628462, 87.565800259), (428.600174065, 87.740089377), (441.696238314, 88.060664748), (461.363367324, 88.520823712), (477.64061994, 88.810121246), (490.573430891, 88.879422902), (496.991230944, 88.838672768), (500.205859595, 88.7942103)],
                knots=[1.0774e-05, 1.0774e-05, 1.0774e-05, 1.0774e-05, 0.250008111, 0.500005448, 0.750002785, 0.875001454, 1.000000122, 1.000000122, 1.000000122, 1.000000122], degree=3))
            add(Edge.make_bspline(
                [(500.205859595, 88.7942103), (503.058403259, 88.754759533), (508.771360909, 88.63685492), (520.125839257, 88.225760782), (534.266224295, 87.340206173), (551.142590634, 85.635354683), (562.414974362, 84.084969045), (568.028462482, 83.22352623)],
                knots=[-1.37e-07, -1.37e-07, -1.37e-07, -1.37e-07, 0.12499988, 0.249999898, 0.499999932, 0.749999966, 1, 1, 1, 1], degree=3))
            Line((568.028462482, 83.22352623), (570.340123356, 82.868780018))
            Line((570.340123356, 82.868780018), (570.340123356, 94.445933872))
            Line((570.340123356, 94.445933872), (566.530123356, 95.007503377))
        make_face()
        with Locations((16.272596326, 52.376396822)):
            Circle(BOSS_EXTRUDE1_OUTLINE_R, mode=Mode.SUBTRACT)
    extrude(amount=BOSS_EXTRUDE1_DEPTH)

    # Fillet1
    fillet1_edges = [part.edges().sort_by_distance(p)[0] for p in [
        (570.340123356, 1.5875, -94.445933872),
        (570.340123356, 1.5875, -82.868780018),
        (6.775897899, 1.5875, -43.316199984),
        (6.775897899, 1.5875, -55.195160056),
    ]]
    fillet(fillet1_edges, radius=FILLET1_R)


solid = part.part
